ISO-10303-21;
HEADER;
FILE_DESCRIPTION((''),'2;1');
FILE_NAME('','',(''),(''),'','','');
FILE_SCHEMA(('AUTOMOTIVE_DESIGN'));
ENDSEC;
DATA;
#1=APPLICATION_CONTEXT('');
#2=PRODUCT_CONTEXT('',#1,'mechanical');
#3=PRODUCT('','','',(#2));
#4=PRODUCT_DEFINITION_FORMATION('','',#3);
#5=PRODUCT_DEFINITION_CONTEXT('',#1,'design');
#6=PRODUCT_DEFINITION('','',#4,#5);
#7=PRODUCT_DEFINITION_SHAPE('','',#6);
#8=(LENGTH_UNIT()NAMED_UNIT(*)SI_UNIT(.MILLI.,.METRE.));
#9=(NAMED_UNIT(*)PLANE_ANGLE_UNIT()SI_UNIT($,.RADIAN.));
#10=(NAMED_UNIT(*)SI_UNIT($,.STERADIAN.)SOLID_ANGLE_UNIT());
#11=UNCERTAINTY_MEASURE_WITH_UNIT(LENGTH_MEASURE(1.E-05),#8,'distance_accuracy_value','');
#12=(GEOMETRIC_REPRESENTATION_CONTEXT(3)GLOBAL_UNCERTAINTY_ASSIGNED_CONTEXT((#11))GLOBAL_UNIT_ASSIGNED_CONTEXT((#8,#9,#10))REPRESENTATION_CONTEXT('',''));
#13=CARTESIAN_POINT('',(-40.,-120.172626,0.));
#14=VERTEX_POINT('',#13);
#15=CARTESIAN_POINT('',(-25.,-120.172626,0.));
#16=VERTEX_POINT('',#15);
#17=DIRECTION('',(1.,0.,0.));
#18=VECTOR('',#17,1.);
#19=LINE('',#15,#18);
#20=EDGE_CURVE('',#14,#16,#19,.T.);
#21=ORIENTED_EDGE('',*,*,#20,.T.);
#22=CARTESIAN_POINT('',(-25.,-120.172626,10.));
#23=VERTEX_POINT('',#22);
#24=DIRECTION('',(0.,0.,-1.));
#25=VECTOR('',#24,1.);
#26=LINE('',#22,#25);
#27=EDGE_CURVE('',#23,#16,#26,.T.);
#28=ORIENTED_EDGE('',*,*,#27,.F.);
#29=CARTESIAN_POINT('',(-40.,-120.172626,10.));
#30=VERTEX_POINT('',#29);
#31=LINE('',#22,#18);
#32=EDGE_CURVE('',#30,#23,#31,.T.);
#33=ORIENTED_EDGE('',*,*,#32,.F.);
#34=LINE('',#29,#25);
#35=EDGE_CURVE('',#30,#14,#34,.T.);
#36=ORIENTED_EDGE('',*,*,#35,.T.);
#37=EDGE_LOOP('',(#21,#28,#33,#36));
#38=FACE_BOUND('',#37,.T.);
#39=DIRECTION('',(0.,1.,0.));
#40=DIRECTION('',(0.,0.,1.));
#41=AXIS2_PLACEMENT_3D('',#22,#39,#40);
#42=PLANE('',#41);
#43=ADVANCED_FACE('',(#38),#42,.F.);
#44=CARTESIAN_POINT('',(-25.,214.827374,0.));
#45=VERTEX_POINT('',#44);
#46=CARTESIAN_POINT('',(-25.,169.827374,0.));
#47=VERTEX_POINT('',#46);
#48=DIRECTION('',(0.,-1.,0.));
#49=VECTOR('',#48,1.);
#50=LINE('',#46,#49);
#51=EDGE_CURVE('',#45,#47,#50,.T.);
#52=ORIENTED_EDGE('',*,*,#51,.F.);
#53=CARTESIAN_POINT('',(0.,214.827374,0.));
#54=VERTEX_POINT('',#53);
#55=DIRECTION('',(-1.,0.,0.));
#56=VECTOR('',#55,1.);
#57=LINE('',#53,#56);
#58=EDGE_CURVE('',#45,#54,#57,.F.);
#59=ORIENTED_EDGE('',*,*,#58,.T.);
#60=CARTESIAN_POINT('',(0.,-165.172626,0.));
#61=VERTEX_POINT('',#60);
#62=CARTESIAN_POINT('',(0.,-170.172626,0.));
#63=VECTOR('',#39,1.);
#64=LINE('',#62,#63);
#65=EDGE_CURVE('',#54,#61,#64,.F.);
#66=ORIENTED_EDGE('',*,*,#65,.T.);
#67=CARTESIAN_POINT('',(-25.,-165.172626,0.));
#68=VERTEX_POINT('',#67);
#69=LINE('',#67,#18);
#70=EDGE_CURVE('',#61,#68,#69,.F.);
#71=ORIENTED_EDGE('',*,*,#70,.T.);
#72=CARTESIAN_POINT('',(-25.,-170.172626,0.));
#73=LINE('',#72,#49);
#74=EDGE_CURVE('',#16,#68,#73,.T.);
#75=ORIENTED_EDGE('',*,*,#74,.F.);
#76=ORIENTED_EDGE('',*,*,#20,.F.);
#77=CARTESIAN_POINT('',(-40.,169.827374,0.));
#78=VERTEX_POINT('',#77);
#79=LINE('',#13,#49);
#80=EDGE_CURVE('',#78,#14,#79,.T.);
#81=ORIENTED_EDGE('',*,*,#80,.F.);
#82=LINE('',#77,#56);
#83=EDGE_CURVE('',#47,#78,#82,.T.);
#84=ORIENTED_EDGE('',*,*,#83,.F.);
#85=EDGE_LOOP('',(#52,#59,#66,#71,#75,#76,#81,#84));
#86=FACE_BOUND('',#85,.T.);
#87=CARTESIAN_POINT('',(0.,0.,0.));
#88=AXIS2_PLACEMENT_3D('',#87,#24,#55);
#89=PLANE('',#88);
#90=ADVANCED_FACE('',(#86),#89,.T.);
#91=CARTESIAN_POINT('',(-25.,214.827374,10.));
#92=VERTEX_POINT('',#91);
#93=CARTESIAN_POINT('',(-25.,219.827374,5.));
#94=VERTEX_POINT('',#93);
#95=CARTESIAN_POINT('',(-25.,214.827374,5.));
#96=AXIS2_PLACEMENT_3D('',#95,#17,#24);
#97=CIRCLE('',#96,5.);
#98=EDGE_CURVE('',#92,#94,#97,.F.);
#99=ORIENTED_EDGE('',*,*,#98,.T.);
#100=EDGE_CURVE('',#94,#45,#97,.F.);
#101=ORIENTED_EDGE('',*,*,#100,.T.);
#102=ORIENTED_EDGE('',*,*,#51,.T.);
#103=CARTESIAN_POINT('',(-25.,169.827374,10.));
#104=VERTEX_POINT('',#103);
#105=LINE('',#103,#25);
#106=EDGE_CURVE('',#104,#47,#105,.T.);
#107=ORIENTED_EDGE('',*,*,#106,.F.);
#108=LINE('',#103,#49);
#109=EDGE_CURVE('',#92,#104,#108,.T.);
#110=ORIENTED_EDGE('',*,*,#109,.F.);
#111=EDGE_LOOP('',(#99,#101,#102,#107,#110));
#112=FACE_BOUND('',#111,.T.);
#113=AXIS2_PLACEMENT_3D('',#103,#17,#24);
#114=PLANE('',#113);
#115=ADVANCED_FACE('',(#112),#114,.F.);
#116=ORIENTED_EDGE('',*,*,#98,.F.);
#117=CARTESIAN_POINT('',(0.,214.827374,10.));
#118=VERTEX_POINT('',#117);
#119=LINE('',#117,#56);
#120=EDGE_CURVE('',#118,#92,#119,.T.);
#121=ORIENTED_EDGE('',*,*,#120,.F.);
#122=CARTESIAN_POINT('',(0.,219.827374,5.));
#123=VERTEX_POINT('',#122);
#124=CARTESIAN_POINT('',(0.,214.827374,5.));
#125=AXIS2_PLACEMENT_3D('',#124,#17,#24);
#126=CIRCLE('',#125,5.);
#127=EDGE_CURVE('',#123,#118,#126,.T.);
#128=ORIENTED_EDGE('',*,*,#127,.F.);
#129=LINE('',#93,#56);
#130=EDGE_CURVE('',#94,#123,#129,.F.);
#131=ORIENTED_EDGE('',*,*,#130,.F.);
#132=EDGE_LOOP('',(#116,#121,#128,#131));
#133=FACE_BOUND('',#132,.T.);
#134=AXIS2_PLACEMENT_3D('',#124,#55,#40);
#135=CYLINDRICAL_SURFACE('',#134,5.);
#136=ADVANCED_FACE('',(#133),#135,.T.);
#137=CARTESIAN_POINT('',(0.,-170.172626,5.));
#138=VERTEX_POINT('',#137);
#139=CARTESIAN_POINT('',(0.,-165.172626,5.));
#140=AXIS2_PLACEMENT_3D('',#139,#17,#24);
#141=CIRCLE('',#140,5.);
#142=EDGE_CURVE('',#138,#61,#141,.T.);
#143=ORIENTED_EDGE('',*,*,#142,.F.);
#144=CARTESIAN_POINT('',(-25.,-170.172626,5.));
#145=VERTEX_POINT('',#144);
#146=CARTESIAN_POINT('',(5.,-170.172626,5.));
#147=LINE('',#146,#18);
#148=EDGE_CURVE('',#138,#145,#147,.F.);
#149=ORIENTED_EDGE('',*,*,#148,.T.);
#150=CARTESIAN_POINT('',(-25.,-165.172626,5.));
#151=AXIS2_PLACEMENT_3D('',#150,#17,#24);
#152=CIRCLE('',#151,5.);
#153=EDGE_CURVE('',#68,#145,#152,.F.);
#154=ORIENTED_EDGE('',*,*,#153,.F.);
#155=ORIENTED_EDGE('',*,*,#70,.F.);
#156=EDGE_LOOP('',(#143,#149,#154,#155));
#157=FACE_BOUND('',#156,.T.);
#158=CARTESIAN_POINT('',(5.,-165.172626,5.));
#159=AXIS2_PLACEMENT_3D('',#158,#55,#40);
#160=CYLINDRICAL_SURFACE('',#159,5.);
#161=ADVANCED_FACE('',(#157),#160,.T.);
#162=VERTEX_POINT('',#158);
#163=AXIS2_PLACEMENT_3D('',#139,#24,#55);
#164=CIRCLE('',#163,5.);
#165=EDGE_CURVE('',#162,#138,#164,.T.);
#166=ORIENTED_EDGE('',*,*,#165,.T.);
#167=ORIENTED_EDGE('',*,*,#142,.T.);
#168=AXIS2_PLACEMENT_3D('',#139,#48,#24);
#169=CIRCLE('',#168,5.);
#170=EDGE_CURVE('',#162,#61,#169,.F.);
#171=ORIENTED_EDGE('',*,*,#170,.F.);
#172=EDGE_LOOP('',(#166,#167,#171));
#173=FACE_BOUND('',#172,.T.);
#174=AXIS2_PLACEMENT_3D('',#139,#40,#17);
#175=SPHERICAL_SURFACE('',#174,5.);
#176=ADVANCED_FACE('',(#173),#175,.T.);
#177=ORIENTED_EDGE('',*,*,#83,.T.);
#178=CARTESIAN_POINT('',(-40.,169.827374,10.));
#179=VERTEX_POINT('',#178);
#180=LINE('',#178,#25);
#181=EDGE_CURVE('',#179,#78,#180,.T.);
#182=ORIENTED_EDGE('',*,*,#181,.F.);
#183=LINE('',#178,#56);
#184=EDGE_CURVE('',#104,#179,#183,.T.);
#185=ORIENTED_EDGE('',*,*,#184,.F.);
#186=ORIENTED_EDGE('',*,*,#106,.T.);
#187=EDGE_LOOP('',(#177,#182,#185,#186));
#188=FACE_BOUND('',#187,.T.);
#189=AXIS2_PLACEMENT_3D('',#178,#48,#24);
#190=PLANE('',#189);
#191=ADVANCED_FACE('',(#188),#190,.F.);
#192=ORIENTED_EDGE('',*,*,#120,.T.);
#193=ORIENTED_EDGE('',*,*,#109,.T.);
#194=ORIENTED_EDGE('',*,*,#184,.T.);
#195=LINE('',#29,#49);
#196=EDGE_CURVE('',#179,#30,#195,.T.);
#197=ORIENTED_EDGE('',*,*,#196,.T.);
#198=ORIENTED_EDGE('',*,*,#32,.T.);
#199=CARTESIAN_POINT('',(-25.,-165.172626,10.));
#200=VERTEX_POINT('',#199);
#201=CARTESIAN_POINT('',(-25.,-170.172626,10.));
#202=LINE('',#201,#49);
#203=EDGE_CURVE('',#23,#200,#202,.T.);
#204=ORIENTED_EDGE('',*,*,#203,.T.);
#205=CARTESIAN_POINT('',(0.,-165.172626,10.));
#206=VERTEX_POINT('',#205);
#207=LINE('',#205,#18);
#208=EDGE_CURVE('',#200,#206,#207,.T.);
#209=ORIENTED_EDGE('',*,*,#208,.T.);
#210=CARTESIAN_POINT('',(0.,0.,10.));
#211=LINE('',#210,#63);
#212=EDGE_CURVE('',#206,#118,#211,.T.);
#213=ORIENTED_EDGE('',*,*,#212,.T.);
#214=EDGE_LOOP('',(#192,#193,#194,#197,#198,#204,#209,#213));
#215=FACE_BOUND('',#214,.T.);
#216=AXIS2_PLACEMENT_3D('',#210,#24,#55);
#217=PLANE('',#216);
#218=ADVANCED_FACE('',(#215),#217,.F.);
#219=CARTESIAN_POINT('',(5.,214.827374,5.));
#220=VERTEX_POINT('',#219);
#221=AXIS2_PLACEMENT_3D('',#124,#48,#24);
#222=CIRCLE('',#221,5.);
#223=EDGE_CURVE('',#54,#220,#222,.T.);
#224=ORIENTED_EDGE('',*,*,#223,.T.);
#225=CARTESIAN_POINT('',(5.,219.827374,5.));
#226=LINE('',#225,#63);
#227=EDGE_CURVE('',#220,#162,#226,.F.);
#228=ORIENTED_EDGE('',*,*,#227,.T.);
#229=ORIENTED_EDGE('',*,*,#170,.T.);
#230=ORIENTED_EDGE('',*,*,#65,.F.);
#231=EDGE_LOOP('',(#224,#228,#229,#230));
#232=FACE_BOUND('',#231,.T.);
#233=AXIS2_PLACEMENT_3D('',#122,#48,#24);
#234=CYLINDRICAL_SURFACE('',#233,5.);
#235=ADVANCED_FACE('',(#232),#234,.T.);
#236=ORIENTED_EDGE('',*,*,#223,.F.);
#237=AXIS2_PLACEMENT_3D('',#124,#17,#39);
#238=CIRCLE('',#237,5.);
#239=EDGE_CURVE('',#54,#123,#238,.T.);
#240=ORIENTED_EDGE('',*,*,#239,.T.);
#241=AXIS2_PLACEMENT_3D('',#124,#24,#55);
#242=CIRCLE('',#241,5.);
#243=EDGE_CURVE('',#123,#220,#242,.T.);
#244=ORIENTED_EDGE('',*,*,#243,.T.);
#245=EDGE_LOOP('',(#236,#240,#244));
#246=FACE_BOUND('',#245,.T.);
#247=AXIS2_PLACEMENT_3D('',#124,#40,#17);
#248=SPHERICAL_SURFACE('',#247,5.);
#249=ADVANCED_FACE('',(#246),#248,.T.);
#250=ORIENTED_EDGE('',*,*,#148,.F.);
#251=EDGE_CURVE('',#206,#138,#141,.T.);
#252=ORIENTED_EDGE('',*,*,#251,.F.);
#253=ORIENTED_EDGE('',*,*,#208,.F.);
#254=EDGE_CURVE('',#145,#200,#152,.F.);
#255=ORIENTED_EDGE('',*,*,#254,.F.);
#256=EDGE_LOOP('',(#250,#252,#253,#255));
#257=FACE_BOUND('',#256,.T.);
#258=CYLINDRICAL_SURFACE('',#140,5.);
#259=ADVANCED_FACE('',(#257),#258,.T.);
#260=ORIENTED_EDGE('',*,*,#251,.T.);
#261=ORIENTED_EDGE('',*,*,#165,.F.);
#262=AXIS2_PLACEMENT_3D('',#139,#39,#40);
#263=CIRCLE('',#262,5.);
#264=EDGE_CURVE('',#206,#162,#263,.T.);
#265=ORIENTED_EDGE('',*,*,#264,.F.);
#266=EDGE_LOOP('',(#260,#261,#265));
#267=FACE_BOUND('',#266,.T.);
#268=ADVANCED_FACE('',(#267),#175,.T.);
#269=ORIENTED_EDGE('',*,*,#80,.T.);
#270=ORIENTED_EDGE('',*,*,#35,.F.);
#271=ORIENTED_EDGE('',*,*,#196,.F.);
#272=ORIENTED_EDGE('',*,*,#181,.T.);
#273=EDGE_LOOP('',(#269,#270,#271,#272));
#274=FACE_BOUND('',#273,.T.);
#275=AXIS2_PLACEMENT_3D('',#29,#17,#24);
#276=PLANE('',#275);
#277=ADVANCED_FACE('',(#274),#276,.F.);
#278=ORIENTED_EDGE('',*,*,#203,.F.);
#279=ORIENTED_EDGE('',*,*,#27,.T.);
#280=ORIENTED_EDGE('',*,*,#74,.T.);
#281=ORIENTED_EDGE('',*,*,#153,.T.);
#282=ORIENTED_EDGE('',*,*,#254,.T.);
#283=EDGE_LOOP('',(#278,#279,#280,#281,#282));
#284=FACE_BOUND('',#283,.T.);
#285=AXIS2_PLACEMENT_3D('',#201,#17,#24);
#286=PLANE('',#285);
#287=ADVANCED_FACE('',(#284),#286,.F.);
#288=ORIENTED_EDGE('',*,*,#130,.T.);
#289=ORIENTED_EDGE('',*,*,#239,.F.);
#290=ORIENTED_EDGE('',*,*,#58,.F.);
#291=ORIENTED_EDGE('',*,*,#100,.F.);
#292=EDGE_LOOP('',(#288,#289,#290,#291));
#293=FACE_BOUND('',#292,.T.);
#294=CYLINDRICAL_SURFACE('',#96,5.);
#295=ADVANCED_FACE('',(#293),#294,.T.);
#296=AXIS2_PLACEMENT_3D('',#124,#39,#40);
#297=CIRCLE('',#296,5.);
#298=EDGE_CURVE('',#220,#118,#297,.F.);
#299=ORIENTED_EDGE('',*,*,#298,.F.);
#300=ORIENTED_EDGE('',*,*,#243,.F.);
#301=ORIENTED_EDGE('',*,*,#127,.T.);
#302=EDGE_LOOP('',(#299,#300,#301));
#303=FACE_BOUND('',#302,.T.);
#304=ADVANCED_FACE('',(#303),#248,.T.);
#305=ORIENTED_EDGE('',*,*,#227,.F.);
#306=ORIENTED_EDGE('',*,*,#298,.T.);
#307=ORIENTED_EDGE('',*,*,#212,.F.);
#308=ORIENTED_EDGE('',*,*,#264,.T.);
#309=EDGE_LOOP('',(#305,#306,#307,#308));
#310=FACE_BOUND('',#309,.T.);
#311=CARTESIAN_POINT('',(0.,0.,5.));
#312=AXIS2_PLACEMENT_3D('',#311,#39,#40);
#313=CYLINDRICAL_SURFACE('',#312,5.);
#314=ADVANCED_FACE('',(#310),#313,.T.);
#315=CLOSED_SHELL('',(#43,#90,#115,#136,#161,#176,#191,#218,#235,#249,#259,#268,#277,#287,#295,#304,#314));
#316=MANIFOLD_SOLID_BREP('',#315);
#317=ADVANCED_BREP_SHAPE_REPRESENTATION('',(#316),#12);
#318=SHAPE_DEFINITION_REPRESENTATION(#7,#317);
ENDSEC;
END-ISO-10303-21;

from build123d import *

# Parameters (mm, degrees)
BOSS_EXTRUDE1_DEPTH = 10
FILLET1_R           = 5
FILLET2_R           = 5
FILLET3_R           = 5


# Some blends are built 0.0001 mm under size
with BuildPart() as part:
    # Sketch1 → Boss-Extrude1 (new body)
    with BuildSketch(Plane.XY):
        Polygon((-40, -120.172625832), (-40, 169.827374168), (-25, 169.827374168), (-25, 219.827374168), (5, 219.827374168), (5, -170.172625832), (-25, -170.172625832), (-25, -120.172625832), align=None)
    extrude(amount=BOSS_EXTRUDE1_DEPTH)

    # Fillet1
    fillet1_edges = [part.edges().sort_by_distance(p)[0] for p in [
        (5, 24.827374168, 10),
        (5, 219.827374168, 5),
        (5, -170.172625832, 5),
        (5, 24.827374168, 0),
    ]]
    fillet(fillet1_edges, radius=FILLET1_R - 0.0001)  # a hair under: the kernel refuses the full size

    # Fillet2
    # the kernel refuses this fillet: 5 mm, written as the material it takes off along each edge
    with BuildSketch(Plane(origin=(5, -165.172625832, 5), x_dir=(0, -1, 0), z_dir=(0, 0, 1))) as fillet2_piece_1:
        with BuildLine():
            CenterArc((0.0001, -4.9999), 4.9999, 0, 90)
            Line((5, -4.9999), (5, 0))
            Line((5, 0), (0.0001, 0))
        make_face()
    revolve(axis=Axis((5, -165.172625832, 5), (1, 0, 0)), revolution_arc=90, mode=Mode.SUBTRACT)
    with BuildSketch(Plane(origin=(5, -165.172625832, 5), x_dir=(0, 0, 1), z_dir=(0, 1, 0))) as fillet2_piece_2:
        with BuildLine():
            CenterArc((0.0001, -4.9999), 4.9999, 0, 90)
            Line((5, -4.9999), (5, 0))
            Line((5, 0), (0.0001, 0))
        make_face()
    revolve(axis=Axis((5, -165.172625832, 5), (1, 0, 0)), revolution_arc=90, mode=Mode.SUBTRACT)
    with BuildSketch(Plane(origin=(5, -170.172625832, 0), x_dir=(0, 1, 0), z_dir=(-1, 0, 0))) as fillet2_piece_3:
        with BuildLine():
            CenterArc((FILLET2_R, -FILLET2_R), FILLET2_R, 90, 90)
            Line((0, -FILLET2_R), (0, 0))
            Line((0, 0), (FILLET2_R, 0))
        make_face()
    extrude(amount=42.5, mode=Mode.SUBTRACT)
    with BuildSketch(Plane(origin=(5, -170.172625832, 10), x_dir=(0, 1, 0), z_dir=(-1, 0, 0))) as fillet2_piece_4:
        with BuildLine():
            CenterArc((FILLET2_R, FILLET2_R), FILLET2_R, 180, 90)
            Line((0, FILLET2_R), (0, 0))
            Line((0, 0), (FILLET2_R, 0))
        make_face()
    extrude(amount=42.5, mode=Mode.SUBTRACT)

    # Fillet3
    # the kernel refuses this fillet: 5 mm, written as the material it takes off along each edge
    with BuildSketch(Plane(origin=(5, 214.827374168, 5), x_dir=(0, 0, -1), z_dir=(0, -1, 0))) as fillet3_piece_1:
        with BuildLine():
            CenterArc((0.0001, -4.9999), 4.9999, 0, 90)
            Line((5, -4.9999), (5, 0))
            Line((5, 0), (0.0001, 0))
        make_face()
    revolve(axis=Axis((5, 214.827374168, 5), (1, 0, 0)), revolution_arc=90, mode=Mode.SUBTRACT)
    with BuildSketch(Plane(origin=(5, 214.827374168, 5), x_dir=(0, 1, 0), z_dir=(0, 0, -1))) as fillet3_piece_2:
        with BuildLine():
            CenterArc((0.0001, -4.9999), 4.9999, 0, 90)
            Line((5, -4.9999), (5, 0))
            Line((5, 0), (0.0001, 0))
        make_face()
    revolve(axis=Axis((5, 214.827374168, 5), (1, 0, 0)), revolution_arc=90, mode=Mode.SUBTRACT)
    with BuildSketch(Plane(origin=(-37.5, 219.827374168, 0), x_dir=(0, 0, 1), z_dir=(1, 0, 0))) as fillet3_piece_3:
        with BuildLine():
            CenterArc((FILLET3_R, FILLET3_R), FILLET3_R, 180, 90)
            Line((0, FILLET3_R), (0, 0))
            Line((0, 0), (FILLET3_R, 0))
        make_face()
    extrude(amount=42.5, mode=Mode.SUBTRACT)
    with BuildSketch(Plane(origin=(-37.5, 219.827374168, 10), x_dir=(0, 0, -1), z_dir=(1, 0, 0))) as fillet3_piece_4:
        with BuildLine():
            CenterArc((FILLET3_R, -FILLET3_R), FILLET3_R, 90, 90)
            Line((0, -FILLET3_R), (0, 0))
            Line((0, 0), (FILLET3_R, 0))
        make_face()
    extrude(amount=42.5, mode=Mode.SUBTRACT)


solid = part.part
